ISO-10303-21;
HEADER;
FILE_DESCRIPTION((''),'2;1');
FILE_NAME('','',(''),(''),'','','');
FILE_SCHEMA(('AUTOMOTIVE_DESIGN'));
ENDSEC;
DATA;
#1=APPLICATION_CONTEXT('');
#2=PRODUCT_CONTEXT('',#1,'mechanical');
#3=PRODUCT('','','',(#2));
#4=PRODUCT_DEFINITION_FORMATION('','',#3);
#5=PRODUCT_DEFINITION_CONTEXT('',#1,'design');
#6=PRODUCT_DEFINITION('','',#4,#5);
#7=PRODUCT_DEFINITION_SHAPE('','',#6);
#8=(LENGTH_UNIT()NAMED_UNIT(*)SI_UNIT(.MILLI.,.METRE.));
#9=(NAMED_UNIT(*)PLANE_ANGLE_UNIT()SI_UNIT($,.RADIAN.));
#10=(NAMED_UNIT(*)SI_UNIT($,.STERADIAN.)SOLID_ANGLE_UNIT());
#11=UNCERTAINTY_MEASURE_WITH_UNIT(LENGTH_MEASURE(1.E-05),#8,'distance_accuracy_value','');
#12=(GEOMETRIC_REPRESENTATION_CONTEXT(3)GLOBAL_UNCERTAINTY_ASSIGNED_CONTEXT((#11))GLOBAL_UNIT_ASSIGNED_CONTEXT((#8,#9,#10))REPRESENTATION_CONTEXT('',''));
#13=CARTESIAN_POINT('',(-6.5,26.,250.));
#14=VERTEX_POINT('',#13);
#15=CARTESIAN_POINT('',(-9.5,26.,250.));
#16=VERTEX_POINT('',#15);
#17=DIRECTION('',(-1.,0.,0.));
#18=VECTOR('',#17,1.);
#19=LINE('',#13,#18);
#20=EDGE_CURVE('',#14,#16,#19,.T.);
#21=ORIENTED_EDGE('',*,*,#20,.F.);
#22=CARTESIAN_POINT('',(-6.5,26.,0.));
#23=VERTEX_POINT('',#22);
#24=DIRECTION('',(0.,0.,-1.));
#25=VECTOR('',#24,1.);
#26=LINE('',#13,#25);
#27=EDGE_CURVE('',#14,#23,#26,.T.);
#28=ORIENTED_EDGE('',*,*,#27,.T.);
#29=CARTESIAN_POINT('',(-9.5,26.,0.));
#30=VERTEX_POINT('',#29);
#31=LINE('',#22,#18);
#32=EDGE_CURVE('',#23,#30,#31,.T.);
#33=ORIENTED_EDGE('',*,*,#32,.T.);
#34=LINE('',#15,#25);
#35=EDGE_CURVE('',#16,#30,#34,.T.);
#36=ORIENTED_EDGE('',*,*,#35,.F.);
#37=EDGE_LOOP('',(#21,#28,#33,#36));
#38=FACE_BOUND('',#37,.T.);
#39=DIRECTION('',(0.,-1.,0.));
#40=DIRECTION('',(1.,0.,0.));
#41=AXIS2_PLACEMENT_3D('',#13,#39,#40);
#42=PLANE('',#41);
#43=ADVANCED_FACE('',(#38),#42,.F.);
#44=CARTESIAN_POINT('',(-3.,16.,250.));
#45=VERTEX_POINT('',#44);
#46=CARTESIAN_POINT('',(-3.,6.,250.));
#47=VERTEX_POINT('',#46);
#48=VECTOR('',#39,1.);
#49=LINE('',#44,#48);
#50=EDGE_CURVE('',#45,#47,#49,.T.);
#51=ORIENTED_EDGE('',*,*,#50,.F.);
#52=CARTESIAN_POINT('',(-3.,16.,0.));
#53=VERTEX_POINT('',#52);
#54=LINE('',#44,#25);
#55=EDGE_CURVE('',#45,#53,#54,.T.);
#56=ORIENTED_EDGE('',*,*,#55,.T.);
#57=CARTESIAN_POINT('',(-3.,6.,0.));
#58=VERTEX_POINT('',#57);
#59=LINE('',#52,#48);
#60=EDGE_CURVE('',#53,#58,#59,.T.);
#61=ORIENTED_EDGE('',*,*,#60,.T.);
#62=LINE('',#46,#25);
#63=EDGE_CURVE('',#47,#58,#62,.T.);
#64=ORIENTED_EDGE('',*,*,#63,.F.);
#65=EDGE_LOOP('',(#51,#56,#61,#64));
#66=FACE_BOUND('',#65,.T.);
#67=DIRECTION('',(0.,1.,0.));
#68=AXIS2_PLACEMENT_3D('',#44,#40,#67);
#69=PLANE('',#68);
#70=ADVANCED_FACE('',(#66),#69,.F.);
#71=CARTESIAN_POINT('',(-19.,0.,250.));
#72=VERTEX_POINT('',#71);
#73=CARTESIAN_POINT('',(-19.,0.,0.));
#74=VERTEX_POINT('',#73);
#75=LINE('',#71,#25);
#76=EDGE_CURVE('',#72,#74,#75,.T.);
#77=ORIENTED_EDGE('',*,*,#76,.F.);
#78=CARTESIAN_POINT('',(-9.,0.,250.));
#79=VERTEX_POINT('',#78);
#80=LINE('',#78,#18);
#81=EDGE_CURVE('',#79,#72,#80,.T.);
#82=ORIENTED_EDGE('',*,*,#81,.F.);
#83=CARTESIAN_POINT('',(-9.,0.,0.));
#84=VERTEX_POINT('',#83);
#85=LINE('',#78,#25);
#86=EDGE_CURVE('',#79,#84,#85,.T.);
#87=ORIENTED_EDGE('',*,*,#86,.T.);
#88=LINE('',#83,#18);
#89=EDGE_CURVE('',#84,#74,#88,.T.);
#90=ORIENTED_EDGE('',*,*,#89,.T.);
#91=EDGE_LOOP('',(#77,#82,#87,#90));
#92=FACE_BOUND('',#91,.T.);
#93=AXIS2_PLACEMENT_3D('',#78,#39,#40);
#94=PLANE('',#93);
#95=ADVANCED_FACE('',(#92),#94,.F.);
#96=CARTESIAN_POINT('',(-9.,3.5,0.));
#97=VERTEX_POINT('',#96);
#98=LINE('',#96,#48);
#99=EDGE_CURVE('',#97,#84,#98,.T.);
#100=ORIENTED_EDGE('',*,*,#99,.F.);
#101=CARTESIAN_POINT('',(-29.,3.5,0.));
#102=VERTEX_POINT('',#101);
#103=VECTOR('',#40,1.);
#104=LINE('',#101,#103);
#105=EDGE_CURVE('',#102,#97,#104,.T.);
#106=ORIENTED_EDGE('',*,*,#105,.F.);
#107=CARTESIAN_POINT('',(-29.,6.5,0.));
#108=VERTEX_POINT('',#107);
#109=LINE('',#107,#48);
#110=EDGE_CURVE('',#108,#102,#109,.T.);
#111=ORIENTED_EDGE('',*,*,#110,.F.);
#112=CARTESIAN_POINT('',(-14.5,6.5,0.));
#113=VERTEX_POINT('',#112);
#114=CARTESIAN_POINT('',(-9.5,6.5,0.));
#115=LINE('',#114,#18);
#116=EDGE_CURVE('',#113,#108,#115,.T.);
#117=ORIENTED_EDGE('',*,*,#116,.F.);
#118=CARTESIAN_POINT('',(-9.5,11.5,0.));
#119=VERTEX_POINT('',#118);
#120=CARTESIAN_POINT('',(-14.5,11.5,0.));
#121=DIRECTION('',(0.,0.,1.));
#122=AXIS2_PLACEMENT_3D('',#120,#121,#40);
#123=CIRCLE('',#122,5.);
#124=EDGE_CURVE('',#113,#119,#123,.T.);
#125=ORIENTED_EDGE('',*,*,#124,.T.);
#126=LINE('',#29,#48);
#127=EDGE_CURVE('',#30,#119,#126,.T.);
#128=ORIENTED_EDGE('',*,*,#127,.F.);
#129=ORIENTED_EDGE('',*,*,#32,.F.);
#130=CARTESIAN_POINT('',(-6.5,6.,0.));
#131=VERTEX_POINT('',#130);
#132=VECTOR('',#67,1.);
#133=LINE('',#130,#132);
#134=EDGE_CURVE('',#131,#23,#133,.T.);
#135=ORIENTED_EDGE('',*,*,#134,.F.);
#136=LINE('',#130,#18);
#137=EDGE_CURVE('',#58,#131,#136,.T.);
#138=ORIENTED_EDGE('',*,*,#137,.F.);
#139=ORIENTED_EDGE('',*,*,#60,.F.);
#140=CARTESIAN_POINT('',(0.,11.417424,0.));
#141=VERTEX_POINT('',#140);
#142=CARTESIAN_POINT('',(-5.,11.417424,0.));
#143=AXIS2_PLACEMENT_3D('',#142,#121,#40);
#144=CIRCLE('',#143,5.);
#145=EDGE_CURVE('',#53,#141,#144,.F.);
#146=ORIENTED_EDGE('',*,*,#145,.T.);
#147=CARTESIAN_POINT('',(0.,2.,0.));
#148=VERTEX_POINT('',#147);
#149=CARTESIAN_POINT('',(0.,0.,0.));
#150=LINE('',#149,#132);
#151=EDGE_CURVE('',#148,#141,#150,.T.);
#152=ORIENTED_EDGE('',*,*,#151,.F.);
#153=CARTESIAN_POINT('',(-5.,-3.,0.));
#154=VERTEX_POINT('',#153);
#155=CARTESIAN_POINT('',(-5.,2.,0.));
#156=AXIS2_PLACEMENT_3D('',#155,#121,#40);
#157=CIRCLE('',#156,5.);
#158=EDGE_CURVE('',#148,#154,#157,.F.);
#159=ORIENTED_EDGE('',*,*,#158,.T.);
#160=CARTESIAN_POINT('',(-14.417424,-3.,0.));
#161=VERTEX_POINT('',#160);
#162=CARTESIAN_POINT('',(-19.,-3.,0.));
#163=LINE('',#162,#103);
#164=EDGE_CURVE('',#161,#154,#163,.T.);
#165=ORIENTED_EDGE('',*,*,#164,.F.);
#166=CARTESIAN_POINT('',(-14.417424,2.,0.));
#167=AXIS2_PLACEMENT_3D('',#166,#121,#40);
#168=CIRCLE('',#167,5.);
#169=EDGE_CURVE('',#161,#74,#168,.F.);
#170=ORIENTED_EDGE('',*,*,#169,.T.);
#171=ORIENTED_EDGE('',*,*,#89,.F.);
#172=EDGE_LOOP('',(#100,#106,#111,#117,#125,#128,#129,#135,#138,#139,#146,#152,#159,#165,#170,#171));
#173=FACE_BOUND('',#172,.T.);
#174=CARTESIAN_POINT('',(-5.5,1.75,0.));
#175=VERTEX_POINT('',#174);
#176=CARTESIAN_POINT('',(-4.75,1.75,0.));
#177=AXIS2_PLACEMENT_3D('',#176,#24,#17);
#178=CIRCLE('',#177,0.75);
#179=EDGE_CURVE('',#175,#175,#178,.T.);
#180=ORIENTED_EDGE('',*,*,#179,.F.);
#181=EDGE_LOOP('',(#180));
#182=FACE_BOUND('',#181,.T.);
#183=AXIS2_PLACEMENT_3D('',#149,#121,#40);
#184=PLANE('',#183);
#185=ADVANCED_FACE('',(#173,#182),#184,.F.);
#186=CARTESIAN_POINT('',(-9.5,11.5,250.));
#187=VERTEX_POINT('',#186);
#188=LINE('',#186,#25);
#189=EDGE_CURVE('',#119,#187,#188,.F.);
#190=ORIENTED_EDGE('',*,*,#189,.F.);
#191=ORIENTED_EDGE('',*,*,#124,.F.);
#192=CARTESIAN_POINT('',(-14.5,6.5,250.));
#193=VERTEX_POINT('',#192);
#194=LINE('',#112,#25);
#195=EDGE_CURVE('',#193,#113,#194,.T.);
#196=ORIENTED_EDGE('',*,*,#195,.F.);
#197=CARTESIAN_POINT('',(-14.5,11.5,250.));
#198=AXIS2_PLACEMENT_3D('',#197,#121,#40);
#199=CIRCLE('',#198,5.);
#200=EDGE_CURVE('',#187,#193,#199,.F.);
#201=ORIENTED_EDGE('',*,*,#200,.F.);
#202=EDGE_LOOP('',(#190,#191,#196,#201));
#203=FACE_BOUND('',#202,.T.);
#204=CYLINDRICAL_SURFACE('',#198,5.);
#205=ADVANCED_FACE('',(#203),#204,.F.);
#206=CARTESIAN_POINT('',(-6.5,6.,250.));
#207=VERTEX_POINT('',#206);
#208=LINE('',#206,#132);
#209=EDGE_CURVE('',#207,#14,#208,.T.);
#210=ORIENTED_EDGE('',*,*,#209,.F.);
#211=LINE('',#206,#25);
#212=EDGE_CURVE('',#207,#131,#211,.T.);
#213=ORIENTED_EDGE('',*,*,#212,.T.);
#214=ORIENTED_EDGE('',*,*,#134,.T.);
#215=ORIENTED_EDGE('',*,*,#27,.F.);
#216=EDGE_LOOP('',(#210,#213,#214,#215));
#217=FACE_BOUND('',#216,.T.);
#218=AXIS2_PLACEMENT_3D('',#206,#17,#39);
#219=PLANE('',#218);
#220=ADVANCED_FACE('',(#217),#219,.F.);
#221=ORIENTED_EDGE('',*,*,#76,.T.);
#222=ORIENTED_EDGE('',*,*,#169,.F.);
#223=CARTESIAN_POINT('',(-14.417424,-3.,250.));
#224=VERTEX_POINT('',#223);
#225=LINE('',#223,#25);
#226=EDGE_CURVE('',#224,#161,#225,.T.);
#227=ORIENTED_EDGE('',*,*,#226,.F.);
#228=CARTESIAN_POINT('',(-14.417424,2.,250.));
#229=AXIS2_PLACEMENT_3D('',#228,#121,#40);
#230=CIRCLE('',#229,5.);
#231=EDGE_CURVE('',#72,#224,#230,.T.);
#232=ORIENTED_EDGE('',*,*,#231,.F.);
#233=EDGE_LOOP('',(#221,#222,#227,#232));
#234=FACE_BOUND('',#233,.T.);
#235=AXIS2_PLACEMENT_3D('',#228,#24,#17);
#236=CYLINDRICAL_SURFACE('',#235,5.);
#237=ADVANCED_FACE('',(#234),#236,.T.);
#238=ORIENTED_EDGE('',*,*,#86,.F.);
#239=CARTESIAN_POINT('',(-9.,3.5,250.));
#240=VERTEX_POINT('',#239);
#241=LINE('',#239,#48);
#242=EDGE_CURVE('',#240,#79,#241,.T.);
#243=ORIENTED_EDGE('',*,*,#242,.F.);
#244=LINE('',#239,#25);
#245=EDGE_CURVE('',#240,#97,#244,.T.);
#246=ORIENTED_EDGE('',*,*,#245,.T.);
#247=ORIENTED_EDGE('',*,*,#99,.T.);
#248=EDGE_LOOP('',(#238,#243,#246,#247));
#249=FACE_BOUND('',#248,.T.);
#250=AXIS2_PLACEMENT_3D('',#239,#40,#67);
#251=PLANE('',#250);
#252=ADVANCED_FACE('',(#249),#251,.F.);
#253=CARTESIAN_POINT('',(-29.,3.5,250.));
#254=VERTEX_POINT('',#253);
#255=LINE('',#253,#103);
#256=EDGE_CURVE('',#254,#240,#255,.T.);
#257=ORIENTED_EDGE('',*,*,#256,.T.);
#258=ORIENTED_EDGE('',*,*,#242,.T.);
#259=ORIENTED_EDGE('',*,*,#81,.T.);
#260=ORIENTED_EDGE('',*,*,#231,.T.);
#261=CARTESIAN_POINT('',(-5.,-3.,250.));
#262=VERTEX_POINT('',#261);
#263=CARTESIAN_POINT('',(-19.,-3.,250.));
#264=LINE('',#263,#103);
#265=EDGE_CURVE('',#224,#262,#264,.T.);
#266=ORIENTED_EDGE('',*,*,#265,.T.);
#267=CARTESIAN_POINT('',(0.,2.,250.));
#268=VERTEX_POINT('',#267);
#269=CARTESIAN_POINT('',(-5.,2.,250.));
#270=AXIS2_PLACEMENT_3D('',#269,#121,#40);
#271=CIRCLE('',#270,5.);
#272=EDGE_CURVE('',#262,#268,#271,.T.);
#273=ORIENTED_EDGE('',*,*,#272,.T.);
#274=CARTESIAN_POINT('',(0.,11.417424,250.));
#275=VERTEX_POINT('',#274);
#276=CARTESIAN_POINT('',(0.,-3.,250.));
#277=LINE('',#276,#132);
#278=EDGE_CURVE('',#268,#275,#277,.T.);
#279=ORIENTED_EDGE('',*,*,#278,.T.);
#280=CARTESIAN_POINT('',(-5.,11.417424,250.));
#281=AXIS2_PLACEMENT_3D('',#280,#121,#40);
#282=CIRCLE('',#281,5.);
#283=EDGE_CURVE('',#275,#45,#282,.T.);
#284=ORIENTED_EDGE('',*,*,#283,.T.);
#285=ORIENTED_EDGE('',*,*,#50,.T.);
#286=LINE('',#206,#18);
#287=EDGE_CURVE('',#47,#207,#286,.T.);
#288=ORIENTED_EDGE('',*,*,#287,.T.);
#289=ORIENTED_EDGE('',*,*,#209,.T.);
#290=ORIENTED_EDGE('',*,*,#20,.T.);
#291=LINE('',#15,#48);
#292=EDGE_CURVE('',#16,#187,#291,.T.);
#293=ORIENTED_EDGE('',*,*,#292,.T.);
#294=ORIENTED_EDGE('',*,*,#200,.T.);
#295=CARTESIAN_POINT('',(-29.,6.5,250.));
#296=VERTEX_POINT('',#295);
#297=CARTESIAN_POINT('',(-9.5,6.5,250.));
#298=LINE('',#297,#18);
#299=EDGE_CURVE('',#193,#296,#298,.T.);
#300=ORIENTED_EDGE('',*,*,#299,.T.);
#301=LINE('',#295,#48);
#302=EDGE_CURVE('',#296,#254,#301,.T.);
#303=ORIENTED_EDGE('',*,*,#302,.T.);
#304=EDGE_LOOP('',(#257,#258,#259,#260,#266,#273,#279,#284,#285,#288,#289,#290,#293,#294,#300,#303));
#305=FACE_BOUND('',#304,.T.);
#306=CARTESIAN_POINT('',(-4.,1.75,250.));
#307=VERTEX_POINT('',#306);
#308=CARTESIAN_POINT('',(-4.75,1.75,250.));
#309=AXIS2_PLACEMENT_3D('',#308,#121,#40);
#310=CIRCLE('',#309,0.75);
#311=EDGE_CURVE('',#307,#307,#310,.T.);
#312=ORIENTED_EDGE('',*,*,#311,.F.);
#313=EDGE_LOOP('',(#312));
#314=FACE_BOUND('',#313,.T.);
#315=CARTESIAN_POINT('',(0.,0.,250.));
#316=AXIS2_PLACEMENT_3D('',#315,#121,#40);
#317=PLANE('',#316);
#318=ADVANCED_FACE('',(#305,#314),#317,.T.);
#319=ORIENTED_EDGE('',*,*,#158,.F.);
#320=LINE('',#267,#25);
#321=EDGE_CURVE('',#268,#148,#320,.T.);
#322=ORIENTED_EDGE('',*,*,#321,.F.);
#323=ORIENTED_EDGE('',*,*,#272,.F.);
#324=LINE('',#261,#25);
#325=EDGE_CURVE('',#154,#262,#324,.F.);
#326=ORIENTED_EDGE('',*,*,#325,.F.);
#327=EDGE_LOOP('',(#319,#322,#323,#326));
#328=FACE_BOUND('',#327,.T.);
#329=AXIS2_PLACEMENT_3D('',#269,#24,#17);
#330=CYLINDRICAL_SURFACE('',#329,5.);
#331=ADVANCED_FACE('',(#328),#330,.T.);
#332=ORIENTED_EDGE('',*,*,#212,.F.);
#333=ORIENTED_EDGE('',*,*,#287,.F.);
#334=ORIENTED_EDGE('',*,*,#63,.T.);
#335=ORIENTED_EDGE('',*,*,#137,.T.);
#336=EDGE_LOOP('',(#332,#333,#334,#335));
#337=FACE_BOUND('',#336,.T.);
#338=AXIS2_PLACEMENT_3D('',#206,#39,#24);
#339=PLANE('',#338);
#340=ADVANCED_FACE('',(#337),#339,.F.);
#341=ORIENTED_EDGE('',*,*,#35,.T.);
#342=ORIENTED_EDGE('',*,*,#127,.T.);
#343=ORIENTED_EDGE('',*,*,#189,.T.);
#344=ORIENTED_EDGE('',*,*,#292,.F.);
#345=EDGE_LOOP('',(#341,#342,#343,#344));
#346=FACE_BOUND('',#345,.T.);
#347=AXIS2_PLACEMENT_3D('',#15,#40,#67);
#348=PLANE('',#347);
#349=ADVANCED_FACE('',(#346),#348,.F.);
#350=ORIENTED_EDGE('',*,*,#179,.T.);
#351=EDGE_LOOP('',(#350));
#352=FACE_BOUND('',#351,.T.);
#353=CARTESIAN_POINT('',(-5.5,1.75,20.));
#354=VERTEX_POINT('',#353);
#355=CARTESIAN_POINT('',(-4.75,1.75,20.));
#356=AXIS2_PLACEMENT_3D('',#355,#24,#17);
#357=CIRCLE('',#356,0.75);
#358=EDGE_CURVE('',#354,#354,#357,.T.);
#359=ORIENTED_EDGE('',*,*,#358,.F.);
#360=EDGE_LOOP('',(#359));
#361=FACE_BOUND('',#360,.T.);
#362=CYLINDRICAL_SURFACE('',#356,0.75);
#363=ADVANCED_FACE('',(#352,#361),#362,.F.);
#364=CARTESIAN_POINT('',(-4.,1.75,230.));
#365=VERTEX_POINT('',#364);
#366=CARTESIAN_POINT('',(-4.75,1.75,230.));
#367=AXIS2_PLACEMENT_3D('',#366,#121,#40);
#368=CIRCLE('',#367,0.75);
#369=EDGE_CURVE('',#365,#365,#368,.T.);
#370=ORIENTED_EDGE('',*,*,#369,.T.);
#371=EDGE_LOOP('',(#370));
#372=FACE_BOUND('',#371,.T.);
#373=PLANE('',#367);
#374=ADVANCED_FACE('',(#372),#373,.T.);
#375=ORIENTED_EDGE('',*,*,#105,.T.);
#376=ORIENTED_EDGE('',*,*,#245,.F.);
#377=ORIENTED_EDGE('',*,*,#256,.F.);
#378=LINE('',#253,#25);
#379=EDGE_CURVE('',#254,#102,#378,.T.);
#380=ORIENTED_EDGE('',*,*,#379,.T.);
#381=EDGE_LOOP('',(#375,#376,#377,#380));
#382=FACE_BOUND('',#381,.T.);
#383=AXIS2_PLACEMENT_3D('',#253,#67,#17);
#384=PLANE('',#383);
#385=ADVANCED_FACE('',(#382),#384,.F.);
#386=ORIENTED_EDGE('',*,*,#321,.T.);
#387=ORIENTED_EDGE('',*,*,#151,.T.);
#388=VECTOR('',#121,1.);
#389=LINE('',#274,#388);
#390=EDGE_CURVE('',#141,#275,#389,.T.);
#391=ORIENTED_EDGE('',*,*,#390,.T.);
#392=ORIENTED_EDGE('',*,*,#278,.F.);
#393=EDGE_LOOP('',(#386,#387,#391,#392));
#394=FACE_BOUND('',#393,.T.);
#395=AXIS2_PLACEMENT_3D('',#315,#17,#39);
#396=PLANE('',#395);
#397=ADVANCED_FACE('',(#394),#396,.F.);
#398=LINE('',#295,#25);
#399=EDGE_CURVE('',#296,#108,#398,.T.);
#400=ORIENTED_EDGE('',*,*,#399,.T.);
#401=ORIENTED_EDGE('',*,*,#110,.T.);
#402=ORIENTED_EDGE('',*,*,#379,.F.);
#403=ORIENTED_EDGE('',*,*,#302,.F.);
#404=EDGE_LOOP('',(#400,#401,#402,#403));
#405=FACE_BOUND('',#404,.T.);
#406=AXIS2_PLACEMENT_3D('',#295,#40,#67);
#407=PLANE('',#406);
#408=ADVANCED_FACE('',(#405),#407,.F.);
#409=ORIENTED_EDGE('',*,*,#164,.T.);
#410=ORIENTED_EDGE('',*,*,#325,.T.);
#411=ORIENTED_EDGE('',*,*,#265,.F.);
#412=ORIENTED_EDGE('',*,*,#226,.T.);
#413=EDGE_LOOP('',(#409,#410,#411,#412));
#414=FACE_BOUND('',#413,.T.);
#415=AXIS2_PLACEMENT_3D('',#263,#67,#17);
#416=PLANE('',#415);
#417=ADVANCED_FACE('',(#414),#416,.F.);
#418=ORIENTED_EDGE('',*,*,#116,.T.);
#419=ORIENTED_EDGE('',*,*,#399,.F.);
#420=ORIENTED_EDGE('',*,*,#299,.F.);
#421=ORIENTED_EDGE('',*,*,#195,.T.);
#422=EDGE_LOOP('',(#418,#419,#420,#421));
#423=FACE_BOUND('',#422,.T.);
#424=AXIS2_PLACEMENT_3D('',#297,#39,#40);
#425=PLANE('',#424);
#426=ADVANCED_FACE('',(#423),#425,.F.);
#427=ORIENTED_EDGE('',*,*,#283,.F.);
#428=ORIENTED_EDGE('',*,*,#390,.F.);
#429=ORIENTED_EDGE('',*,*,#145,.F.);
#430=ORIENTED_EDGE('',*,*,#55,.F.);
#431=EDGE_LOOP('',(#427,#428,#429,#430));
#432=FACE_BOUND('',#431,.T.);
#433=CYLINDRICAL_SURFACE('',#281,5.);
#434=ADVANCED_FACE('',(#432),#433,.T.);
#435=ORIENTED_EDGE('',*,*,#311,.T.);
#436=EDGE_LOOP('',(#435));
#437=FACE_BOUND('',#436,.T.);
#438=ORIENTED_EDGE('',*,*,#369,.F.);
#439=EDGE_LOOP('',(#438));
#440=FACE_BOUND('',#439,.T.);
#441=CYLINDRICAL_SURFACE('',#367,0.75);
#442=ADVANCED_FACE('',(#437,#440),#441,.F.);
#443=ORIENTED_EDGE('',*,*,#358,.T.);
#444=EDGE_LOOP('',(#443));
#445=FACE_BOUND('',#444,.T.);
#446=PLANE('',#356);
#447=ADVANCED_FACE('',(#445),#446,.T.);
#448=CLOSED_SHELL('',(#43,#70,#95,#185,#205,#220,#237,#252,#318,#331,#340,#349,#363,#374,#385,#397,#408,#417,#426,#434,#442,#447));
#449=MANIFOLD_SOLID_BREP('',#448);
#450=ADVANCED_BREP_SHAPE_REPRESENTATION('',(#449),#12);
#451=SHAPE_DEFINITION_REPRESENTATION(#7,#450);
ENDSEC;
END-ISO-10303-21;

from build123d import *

# Parameters (mm, degrees)
BOSS_EXTRUDE1_DEPTH = 250
FILLET1_R           = 5
SKETCH4_R           = 0.75
CUT_EXTRUDE1_DEPTH  = 20
CUT_EXTRUDE2_START  = -20
SKETCH5_R           = 0.75
CUT_EXTRUDE2_DEPTH  = 20


with BuildPart() as part:
    # Sketch1 → Boss-Extrude1 (new body)
    with BuildSketch(Plane.XY):
        Polygon((0, 0), (0, 16), (-3, 16), (-3, 6), (-6.5, 6), (-6.5, 26), (-9.5, 26), (-9.5, 6.5), (-29, 6.5), (-29, 3.5), (-9, 3.5), (-9, 0), (-19, 0), (-19, -3), (0, -3), align=None)
    extrude(amount=BOSS_EXTRUDE1_DEPTH)

    # Fillet1
    # the kernel refuses this fillet: 5 mm, written as the material it adds along each edge
    with BuildSketch(Plane(origin=(-9.5, 6.5, 0), x_dir=(-1, 0, 0), z_dir=(0, 0, 1))) as fillet1_piece_1:
        with BuildLine():
            CenterArc((FILLET1_R, -FILLET1_R), FILLET1_R, 90, 90)
            Line((0, -FILLET1_R), (0, 0))
            Line((0, 0), (FILLET1_R, 0))
        make_face()
    extrude(amount=250)
    # the kernel refuses this fillet: 5 mm, written as the material it takes off along each edge
    with BuildSketch(Plane(origin=(-19, -3, -11.456439237), x_dir=(1, 0, 0), z_dir=(0, 0, 1))) as fillet1_2_piece_1:
        with BuildLine():
            CenterArc((4.582575695, 5), FILLET1_R, 203.578178478, 66.421821522)
            Line((0, 3), (0, 0))
            Line((0, 0), (4.582575695, 0))
        make_face()
    extrude(amount=272.912878475, mode=Mode.SUBTRACT)
    with BuildSketch(Plane(origin=(0, -3, -12.5), x_dir=(0, 1, 0), z_dir=(0, 0, 1))) as fillet1_2_piece_2:
        with BuildLine():
            CenterArc((FILLET1_R, FILLET1_R), FILLET1_R, 180, 90)
            Line((0, FILLET1_R), (0, 0))
            Line((0, 0), (FILLET1_R, 0))
        make_face()
    extrude(amount=275, mode=Mode.SUBTRACT)
    with BuildSketch(Plane(origin=(0, 16, -11.456439237), x_dir=(0, -1, 0), z_dir=(0, 0, 1))) as fillet1_2_piece_3:
        with BuildLine():
            CenterArc((4.582575695, -5), FILLET1_R, 90, 66.421821522)
            Line((0, -3), (0, 0))
            Line((0, 0), (4.582575695, 0))
        make_face()
    extrude(amount=272.912878475, mode=Mode.SUBTRACT)

    # Sketch4 → Cut-Extrude1 (cut)
    with BuildSketch(Plane(origin=(0, 0, 0), x_dir=(-1, 0, 0), z_dir=(0, 0, -1))):
        with Locations((4.75, 1.75)):
            Circle(SKETCH4_R)
    extrude(amount=-CUT_EXTRUDE1_DEPTH, mode=Mode.SUBTRACT)

    # Sketch5 → Cut-Extrude2 (cut)
    with BuildSketch(Plane.XY.offset(250).offset(CUT_EXTRUDE2_START)):
        with Locations(Location((-4.75, 1.75, 0), (0, 0, 180))):
            Circle(SKETCH5_R)
    extrude(amount=CUT_EXTRUDE2_DEPTH, mode=Mode.SUBTRACT)


solid = part.part
